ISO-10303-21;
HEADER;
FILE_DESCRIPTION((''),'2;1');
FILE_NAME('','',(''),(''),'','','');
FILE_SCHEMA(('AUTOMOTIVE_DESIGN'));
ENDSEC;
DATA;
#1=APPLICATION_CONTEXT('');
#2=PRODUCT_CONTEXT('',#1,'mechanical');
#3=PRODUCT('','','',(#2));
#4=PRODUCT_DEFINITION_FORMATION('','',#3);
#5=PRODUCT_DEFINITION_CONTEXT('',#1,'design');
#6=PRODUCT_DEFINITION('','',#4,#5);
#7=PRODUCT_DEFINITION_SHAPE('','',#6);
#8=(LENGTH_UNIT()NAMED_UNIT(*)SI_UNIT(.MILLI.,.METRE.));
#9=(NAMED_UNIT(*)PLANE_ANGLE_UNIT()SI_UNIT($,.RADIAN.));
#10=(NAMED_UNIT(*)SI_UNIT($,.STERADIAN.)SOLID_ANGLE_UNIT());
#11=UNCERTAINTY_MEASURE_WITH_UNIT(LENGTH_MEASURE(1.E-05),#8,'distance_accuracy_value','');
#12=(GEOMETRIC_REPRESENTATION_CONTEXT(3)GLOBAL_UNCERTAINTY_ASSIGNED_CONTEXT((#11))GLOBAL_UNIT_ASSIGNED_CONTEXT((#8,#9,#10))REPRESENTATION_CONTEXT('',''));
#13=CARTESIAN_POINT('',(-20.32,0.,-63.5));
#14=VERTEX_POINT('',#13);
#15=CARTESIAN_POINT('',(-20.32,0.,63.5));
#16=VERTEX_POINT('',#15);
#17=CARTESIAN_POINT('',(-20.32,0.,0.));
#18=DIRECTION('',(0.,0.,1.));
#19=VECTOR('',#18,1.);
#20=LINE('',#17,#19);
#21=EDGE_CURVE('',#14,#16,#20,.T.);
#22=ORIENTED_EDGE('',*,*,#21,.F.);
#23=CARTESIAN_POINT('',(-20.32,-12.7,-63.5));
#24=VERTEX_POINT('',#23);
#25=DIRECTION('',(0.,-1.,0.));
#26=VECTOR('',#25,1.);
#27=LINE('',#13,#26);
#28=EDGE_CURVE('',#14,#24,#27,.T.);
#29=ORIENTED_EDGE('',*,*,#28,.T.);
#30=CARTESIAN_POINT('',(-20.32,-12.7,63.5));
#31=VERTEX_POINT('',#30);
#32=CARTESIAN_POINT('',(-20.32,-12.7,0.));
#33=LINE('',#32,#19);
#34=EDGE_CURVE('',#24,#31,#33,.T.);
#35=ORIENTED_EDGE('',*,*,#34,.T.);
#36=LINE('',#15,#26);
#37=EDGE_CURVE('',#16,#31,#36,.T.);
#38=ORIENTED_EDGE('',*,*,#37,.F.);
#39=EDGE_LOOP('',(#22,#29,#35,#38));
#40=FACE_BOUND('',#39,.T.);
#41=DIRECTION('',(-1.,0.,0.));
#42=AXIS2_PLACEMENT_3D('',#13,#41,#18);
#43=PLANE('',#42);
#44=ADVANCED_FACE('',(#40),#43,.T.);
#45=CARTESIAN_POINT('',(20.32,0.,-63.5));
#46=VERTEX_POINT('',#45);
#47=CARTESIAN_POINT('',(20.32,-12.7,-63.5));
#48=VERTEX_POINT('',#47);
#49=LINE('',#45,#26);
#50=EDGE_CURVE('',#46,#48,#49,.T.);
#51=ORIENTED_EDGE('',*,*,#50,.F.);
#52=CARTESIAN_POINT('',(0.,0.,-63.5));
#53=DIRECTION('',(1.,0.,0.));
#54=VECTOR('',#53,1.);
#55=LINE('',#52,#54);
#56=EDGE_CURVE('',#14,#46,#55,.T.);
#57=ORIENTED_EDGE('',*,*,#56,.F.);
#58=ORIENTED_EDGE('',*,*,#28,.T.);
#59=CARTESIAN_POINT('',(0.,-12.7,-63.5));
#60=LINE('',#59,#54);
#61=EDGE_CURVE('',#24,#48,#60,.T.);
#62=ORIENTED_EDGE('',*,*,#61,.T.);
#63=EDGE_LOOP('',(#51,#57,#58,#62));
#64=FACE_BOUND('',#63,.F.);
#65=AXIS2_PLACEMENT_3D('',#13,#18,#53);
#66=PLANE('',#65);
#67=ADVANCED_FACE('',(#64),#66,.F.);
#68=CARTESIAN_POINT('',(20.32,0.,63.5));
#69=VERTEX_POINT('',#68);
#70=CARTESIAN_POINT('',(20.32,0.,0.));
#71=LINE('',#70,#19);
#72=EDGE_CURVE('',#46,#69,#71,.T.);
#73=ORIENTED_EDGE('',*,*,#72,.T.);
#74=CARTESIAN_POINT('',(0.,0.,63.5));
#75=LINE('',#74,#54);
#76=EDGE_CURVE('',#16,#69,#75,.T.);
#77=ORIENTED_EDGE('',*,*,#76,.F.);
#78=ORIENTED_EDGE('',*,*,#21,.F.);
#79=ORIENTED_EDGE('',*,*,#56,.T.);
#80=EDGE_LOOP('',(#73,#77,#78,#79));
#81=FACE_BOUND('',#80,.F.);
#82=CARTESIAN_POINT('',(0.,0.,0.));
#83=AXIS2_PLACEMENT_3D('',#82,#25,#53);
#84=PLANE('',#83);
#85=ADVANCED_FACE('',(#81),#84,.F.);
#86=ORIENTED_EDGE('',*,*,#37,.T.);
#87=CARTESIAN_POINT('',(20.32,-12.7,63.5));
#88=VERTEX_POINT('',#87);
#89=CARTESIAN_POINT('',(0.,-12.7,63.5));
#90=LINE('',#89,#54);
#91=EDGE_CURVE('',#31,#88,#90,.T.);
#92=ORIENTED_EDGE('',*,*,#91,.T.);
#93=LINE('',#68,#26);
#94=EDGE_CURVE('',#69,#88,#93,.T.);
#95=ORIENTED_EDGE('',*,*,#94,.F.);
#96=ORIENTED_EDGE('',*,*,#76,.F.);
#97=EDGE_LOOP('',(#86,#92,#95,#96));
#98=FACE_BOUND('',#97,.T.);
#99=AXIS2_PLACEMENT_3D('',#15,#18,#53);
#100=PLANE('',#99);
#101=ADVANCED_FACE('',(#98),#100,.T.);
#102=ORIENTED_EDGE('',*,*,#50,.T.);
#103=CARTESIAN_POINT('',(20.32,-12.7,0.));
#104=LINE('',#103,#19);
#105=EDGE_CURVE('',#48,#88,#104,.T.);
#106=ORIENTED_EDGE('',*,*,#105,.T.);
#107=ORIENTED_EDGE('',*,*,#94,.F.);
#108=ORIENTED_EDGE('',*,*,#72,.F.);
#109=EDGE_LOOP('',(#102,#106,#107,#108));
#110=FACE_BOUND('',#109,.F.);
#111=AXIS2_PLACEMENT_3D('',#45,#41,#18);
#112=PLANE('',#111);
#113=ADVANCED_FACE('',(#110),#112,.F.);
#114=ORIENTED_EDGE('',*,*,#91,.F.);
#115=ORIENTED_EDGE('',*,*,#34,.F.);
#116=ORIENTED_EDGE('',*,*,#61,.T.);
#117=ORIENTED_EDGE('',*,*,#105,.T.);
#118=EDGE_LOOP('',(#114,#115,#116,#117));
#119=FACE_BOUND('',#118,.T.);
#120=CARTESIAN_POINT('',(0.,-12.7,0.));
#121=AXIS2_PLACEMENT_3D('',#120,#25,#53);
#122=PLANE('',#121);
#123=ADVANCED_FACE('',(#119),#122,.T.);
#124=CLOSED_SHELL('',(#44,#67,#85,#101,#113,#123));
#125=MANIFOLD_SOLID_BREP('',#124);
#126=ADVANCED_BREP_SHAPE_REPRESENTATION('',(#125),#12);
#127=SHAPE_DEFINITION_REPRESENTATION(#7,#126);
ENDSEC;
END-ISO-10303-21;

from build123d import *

# Parameters (mm, degrees)
F0_W     = 40.64
F0_H     = 127
F1_DEPTH = 12.7


# Not quite as in the source:
# - a feature names something its author has since deleted; it is built from what else it names


with BuildPart() as f1:
    # F0 (on Front) → F1 (new body)
    with BuildSketch(Plane.XZ):
        Rectangle(F0_W, F0_H)
    extrude(amount=F1_DEPTH)


solid = f1.part
